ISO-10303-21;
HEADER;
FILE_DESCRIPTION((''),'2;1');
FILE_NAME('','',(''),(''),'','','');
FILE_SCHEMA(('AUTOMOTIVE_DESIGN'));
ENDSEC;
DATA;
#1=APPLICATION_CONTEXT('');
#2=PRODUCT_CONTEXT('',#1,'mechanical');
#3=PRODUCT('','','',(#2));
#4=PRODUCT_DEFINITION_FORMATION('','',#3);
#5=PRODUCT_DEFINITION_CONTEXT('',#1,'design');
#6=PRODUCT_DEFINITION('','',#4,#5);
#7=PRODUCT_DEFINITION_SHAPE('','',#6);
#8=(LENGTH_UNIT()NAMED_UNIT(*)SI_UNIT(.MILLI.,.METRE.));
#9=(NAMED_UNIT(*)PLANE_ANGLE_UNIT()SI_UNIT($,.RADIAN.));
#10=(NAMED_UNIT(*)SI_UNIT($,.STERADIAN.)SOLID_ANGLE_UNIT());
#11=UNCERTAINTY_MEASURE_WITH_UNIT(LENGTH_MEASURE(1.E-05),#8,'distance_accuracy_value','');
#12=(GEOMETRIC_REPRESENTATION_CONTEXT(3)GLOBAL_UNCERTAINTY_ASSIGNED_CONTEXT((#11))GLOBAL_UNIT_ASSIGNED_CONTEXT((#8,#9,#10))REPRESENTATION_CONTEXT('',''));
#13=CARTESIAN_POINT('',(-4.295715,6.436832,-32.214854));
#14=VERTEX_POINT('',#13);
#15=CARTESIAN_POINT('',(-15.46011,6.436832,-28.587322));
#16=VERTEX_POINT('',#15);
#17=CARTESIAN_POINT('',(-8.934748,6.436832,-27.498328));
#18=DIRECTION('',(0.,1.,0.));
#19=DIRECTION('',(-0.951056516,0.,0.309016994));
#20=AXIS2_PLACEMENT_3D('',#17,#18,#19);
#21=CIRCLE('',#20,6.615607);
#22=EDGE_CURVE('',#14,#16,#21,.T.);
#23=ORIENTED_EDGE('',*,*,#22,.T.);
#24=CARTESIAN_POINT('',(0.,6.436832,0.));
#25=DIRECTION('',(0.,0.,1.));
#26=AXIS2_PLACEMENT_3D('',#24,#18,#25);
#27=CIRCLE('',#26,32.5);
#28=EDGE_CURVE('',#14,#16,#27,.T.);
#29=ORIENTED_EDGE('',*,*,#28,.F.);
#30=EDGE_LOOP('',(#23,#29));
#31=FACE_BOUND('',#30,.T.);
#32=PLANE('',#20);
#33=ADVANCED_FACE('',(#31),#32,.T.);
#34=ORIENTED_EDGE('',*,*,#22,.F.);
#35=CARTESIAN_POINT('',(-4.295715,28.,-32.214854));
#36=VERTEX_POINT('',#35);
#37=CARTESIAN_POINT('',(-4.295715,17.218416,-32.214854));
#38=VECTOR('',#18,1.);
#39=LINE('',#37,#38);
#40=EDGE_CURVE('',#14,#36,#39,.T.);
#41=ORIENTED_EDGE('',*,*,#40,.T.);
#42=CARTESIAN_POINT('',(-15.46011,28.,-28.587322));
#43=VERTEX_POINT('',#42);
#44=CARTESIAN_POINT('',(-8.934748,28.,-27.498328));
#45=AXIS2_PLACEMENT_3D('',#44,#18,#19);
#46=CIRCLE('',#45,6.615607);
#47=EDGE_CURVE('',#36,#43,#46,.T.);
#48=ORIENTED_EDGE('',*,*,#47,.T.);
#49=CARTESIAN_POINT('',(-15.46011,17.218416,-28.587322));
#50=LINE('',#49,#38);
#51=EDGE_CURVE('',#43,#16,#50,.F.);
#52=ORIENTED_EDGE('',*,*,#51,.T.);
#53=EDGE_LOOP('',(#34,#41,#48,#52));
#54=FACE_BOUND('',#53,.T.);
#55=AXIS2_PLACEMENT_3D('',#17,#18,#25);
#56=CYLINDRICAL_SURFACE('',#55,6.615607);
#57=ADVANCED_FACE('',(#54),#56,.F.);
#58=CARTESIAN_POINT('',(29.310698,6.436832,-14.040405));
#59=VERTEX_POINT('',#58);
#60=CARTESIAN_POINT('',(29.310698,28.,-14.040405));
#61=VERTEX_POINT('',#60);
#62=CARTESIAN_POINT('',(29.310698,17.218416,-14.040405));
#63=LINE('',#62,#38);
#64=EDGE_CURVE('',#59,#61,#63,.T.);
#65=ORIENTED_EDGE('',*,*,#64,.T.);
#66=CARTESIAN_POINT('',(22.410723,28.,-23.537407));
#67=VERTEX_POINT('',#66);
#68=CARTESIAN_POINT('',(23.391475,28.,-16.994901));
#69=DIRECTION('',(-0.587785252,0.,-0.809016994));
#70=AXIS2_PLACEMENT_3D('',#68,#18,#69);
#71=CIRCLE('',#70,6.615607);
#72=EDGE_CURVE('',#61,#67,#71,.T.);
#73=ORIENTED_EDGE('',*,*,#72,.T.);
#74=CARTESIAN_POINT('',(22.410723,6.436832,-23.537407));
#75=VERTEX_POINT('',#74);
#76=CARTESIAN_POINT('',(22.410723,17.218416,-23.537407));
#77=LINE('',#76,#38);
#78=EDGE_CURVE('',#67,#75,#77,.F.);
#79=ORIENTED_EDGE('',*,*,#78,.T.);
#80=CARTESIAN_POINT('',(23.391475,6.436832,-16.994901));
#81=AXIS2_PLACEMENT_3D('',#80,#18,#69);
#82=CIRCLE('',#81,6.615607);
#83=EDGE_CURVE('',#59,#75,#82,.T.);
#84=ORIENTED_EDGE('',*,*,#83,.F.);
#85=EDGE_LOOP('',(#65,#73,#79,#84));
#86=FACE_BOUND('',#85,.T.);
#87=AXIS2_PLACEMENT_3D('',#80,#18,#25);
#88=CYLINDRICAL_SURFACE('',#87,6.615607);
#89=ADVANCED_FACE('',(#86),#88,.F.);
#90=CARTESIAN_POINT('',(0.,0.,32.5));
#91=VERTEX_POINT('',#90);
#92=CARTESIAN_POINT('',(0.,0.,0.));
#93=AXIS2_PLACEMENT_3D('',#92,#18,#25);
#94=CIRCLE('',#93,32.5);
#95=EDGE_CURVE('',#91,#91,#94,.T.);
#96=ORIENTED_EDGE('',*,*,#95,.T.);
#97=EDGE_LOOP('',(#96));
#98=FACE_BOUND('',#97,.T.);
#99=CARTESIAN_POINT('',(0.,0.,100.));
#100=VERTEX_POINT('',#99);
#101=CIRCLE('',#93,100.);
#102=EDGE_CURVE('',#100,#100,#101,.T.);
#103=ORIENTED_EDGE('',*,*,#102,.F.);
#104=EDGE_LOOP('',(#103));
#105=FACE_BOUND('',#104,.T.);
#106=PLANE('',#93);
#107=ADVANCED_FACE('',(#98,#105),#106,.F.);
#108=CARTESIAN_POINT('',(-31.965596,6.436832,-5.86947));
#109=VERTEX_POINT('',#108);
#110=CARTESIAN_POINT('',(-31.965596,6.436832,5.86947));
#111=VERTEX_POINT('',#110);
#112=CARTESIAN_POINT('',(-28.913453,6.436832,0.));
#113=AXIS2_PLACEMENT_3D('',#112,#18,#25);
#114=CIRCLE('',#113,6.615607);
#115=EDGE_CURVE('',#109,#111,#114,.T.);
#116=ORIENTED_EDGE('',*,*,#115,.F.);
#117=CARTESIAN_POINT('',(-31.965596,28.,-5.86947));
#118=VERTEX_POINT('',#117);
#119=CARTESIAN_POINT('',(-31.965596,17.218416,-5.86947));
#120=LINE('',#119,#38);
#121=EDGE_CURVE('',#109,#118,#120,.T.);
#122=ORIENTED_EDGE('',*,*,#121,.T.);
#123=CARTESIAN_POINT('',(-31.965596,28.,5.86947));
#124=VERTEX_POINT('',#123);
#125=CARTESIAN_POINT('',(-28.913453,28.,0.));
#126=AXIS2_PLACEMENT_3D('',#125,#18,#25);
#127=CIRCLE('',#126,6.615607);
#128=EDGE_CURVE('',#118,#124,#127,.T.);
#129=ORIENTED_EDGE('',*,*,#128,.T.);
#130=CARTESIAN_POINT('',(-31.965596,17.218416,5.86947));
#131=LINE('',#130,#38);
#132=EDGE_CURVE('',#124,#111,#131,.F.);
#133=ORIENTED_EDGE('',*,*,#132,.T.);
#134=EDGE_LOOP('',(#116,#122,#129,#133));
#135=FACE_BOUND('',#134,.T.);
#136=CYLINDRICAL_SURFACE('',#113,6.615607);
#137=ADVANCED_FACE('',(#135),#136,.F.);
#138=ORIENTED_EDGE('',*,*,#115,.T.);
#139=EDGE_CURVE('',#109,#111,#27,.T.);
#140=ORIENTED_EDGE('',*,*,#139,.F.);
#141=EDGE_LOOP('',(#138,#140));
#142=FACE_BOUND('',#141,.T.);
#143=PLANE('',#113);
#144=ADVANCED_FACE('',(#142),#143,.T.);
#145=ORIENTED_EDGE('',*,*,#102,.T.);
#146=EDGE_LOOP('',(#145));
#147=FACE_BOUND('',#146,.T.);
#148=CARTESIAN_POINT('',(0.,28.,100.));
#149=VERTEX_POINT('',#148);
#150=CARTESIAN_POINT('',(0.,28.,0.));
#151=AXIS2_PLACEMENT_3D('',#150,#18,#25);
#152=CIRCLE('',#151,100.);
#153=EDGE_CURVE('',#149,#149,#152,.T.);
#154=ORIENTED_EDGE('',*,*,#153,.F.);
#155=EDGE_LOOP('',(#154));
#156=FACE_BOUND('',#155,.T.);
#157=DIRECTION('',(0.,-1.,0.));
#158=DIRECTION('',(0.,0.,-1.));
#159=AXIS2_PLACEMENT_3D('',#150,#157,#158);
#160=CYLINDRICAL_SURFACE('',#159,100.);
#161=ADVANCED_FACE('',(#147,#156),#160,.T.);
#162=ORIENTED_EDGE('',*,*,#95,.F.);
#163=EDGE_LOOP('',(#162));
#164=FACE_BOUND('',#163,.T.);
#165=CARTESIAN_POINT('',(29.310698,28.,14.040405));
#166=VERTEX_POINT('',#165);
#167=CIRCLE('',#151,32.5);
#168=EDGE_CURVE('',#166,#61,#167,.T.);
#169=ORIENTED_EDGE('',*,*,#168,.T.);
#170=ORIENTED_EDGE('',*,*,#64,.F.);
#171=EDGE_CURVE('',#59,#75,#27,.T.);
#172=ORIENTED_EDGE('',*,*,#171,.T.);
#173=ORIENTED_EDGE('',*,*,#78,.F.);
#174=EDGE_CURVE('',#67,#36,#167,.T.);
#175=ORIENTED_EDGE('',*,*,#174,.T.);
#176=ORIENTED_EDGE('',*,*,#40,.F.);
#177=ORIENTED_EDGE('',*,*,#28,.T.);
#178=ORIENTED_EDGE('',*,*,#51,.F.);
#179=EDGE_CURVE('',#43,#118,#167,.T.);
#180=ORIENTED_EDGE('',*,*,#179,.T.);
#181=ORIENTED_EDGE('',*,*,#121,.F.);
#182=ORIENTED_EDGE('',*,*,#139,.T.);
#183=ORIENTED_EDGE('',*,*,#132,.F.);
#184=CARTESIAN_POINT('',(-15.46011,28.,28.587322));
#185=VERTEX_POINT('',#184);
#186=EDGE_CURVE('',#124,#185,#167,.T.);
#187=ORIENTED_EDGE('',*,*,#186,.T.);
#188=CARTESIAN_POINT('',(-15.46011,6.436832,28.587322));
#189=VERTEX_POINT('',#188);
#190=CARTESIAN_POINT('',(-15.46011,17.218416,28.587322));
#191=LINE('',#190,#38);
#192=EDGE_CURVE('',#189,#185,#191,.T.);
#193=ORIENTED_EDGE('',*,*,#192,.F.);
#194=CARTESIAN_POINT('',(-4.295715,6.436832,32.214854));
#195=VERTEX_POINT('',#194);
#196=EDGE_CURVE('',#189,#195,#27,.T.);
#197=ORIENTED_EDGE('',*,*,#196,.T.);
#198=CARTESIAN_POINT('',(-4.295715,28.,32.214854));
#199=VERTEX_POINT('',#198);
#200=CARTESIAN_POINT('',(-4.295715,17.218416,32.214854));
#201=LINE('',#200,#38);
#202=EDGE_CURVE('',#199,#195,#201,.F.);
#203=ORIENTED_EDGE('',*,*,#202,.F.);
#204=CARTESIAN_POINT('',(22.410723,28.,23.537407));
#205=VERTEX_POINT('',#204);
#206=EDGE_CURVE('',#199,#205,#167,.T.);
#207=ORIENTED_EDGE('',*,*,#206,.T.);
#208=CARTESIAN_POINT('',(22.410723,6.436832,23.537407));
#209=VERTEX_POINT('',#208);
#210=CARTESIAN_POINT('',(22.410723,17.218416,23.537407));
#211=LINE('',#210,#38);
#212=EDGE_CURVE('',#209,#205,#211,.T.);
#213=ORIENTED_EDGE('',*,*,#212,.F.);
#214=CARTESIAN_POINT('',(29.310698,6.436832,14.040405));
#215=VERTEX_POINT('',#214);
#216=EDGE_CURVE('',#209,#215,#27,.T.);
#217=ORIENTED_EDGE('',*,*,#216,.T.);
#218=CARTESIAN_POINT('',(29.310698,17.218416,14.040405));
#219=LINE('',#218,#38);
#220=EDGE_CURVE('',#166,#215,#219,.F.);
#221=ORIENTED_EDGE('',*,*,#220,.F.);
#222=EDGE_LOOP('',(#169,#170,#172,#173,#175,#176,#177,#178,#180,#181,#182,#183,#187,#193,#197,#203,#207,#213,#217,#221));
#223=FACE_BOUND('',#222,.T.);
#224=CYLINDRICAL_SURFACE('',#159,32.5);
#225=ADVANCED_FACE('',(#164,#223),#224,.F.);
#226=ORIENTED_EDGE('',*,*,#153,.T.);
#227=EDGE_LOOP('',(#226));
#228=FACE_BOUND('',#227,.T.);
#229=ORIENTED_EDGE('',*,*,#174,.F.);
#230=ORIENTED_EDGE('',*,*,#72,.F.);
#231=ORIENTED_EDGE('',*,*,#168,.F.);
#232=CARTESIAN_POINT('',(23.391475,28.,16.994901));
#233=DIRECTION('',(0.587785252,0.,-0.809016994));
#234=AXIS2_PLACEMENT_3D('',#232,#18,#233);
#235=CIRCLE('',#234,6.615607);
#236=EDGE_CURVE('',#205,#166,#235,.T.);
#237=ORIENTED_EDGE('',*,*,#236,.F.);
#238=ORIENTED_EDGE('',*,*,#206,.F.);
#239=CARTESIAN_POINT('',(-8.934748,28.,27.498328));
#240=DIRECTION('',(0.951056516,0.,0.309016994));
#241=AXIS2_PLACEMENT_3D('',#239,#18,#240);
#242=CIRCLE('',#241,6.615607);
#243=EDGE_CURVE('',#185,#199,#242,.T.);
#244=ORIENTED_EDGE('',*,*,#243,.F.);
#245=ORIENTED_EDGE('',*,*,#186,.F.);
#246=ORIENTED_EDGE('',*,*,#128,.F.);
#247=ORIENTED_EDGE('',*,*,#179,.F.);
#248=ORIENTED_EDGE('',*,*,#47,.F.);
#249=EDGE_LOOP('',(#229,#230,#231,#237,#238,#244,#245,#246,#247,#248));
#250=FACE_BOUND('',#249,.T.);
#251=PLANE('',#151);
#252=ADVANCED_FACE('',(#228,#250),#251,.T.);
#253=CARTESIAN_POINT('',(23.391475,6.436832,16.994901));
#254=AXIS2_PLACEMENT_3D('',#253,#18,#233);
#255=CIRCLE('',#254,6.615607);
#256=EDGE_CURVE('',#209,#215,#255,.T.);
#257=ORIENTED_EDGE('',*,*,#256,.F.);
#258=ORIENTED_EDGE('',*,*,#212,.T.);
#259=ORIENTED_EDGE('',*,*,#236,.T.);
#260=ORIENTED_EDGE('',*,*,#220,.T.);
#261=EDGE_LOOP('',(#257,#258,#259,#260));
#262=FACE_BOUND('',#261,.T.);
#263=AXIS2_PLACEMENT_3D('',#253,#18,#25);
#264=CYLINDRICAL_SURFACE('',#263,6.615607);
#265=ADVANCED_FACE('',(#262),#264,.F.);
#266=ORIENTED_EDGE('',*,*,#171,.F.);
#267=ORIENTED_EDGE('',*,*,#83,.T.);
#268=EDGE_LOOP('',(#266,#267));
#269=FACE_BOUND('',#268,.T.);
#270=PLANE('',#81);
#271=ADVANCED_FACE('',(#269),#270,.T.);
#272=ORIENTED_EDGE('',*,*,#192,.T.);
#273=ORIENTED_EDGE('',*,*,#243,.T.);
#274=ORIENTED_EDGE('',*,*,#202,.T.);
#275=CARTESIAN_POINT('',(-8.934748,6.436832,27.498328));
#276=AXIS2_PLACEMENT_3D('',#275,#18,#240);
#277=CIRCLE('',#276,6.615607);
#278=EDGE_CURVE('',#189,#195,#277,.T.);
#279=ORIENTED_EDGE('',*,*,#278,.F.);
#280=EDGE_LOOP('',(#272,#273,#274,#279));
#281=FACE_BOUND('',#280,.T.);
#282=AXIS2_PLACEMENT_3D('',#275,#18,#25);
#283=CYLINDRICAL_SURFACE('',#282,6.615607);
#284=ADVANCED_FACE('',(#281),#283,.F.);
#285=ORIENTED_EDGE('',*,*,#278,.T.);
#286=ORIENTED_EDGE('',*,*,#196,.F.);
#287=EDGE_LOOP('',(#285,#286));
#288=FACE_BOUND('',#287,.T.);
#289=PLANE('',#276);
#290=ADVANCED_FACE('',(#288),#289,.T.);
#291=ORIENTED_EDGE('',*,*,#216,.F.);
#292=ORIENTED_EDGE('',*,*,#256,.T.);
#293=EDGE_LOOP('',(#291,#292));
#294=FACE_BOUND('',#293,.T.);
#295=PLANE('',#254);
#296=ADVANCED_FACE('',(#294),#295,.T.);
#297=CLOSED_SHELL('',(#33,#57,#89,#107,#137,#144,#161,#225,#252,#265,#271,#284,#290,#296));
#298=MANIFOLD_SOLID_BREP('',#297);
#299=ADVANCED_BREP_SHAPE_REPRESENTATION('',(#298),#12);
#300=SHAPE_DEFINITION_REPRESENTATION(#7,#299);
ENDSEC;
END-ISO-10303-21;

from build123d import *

# Parameters (mm, degrees)
SKETCH1_R           = 100
BOSS_EXTRUDE1_DEPTH = 28
SKETCH2_R           = 32.5
CUT_EXTRUDE1_DEPTH  = 145.166570328
SKETCH3_R           = 6.615606699
CUT_EXTRUDE2_DEPTH  = 21.563167694
CIRPATTERN1_COUNT   = 5


with BuildPart() as part:
    # Sketch1 → Boss-Extrude1 (new body)
    with BuildSketch(Plane(origin=(0, 0, 0), x_dir=(1, 0, 0), z_dir=(0, 1, 0))):
        Circle(SKETCH1_R)
    extrude(amount=BOSS_EXTRUDE1_DEPTH)

    # Sketch2 → Cut-Extrude1 (cut, through all)
    with BuildSketch(Plane(origin=(0, 0, 0), x_dir=(1, 0, 0), z_dir=(0, 1, 0))):
        Circle(SKETCH2_R)
    extrude(amount=CUT_EXTRUDE1_DEPTH, mode=Mode.SUBTRACT)

    # Sketch3 → Cut-Extrude2 (cut)
    with BuildSketch(Plane(origin=(0, 28, 0), x_dir=(1, 0, 0), z_dir=(0, 1, 0))):
        with Locations((-28.913452943, 0)):
            Circle(SKETCH3_R)
    cut_extrude2 = extrude(amount=-CUT_EXTRUDE2_DEPTH, mode=Mode.SUBTRACT)

    # CirPattern1: Cut-Extrude2 ×5 about axis
    cirpattern1_axis = Axis((0, 0, 0), (0, 1, 0))
    for i in range(1, CIRPATTERN1_COUNT):
        add(cut_extrude2.rotate(cirpattern1_axis, i * 360 / CIRPATTERN1_COUNT), mode=Mode.SUBTRACT)


solid = part.part
